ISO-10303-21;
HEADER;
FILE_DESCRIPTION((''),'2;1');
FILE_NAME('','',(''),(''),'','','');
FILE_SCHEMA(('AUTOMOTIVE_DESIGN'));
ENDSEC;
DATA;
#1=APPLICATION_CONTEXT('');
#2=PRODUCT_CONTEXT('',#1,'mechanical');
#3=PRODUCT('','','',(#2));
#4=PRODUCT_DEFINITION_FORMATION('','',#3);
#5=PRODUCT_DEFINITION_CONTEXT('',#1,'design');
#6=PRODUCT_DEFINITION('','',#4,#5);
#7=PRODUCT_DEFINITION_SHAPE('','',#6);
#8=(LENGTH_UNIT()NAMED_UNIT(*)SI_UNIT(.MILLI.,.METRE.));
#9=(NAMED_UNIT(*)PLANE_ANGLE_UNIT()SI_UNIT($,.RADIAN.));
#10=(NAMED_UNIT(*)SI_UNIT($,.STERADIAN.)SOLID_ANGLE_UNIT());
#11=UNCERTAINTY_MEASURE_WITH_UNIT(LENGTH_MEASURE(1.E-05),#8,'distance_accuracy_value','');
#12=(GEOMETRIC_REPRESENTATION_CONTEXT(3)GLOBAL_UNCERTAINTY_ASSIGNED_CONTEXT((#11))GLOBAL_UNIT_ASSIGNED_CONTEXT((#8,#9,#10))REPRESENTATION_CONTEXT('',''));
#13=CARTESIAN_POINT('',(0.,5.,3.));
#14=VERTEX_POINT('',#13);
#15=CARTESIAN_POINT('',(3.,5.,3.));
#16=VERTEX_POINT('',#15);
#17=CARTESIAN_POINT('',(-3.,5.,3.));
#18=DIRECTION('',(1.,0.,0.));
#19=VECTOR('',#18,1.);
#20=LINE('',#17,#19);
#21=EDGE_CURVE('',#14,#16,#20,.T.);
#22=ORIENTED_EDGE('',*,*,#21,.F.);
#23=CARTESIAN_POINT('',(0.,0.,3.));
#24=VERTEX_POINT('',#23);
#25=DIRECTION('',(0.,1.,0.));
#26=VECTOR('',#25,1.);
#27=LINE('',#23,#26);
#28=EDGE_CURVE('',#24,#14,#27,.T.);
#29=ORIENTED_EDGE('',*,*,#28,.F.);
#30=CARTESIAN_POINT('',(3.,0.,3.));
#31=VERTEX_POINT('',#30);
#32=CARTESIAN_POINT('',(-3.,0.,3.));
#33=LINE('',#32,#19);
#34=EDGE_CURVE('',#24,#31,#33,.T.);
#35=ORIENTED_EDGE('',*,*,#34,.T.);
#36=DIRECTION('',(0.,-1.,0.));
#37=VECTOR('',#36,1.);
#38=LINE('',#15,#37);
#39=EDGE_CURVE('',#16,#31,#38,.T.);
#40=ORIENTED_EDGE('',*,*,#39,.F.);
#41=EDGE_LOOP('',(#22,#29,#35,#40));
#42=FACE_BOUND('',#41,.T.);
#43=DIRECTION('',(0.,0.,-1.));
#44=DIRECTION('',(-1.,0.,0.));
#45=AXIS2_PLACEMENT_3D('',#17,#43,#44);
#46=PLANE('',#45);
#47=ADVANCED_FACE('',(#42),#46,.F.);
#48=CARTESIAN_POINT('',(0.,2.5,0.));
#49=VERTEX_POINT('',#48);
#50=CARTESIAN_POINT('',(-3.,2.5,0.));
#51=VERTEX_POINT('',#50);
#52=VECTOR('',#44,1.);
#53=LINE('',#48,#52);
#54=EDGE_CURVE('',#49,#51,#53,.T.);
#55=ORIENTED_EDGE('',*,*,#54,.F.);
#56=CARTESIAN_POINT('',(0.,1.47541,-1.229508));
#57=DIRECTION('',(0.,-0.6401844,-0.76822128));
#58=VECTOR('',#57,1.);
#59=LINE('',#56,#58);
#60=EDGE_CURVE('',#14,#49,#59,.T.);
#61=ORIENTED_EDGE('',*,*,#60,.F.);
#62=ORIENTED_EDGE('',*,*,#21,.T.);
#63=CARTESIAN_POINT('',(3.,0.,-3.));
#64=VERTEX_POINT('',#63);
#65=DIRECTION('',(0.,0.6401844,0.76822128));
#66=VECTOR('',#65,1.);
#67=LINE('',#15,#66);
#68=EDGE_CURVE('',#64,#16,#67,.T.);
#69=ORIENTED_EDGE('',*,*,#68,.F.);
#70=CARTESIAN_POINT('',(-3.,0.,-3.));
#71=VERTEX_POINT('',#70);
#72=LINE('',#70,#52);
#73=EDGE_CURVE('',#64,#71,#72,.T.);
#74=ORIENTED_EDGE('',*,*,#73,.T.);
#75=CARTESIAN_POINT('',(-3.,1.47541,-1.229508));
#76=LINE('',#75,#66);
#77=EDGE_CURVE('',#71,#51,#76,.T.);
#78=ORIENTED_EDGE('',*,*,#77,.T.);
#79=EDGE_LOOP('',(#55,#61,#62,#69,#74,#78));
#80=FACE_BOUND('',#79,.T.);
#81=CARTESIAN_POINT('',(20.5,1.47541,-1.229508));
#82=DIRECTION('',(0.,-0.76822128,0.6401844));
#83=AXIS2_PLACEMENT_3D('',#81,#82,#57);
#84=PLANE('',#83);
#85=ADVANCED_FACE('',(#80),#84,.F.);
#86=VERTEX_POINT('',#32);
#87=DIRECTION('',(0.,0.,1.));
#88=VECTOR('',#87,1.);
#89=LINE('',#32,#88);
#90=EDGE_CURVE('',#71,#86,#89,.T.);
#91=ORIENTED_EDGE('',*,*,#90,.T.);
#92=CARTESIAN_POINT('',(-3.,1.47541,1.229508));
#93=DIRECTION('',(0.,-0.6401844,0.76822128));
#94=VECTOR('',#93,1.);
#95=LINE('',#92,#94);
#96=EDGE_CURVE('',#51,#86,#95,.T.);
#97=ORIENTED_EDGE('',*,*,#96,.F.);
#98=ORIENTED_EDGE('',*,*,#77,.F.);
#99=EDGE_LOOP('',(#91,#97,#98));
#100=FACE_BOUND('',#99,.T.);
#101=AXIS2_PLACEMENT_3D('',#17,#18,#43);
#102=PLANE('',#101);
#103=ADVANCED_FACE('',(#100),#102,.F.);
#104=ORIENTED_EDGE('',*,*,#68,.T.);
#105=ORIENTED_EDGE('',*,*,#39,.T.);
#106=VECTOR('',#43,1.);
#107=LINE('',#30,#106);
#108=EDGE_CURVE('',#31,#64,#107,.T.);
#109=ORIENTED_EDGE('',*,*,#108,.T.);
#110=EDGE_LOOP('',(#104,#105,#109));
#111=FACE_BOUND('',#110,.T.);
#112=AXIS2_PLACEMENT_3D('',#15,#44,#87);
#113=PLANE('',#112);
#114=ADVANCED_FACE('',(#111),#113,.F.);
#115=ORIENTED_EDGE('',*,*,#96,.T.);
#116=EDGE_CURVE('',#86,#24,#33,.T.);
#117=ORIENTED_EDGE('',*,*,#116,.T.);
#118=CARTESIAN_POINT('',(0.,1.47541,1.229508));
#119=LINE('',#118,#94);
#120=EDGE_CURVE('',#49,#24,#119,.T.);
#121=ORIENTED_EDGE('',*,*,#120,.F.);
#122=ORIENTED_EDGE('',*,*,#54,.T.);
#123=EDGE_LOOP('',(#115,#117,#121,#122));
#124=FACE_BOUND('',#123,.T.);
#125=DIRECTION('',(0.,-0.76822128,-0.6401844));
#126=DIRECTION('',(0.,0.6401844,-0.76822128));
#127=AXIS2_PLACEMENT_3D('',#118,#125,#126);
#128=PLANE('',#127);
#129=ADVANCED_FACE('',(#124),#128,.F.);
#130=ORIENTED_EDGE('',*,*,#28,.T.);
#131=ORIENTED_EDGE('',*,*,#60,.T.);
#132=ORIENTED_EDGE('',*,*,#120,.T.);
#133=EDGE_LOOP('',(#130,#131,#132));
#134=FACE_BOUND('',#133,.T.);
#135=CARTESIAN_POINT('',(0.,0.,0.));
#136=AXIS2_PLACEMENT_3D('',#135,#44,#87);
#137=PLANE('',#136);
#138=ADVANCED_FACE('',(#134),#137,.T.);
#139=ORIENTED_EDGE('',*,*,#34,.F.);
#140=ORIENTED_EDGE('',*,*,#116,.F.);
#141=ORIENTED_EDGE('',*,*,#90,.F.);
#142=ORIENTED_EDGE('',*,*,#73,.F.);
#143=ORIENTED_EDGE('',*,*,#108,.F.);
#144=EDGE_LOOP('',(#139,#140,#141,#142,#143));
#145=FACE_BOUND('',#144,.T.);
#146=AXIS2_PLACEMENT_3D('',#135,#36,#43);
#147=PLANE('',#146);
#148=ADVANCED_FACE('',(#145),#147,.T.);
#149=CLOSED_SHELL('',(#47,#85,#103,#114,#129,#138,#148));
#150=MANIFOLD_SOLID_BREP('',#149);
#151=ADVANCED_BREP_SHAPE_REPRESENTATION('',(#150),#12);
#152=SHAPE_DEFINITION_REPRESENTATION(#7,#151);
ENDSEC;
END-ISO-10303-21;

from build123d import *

# Parameters (mm, degrees)
SKETCH1_W           = 6
SKETCH1_H           = 6
BOSS_EXTRUDE1_DEPTH = 5
CUT_EXTRUDE9_DEPTH  = 23.5
CUT_EXTRUDE10_DEPTH = 3


with BuildPart() as part:
    # Sketch1 → Boss-Extrude1 (new body)
    with BuildSketch(Plane(origin=(0, 0, 0), x_dir=(1, 0, 0), z_dir=(0, 1, 0))):
        Rectangle(SKETCH1_W, SKETCH1_H)
    extrude(amount=BOSS_EXTRUDE1_DEPTH)

    # Sketch12 → Cut-Extrude9 (cut)
    with BuildSketch(Plane.ZY.offset(3)):
        Polygon((-3, 5), (-3, 0), (3, 5), align=None)
    extrude(amount=-CUT_EXTRUDE9_DEPTH, mode=Mode.SUBTRACT)

    # Sketch13 → Cut-Extrude10 (cut)
    with BuildSketch(Plane.ZY.offset(3)):
        Polygon((3, 5), (0, 2.5), (3, 0), align=None)
    extrude(amount=-CUT_EXTRUDE10_DEPTH, mode=Mode.SUBTRACT)


solid = part.part
